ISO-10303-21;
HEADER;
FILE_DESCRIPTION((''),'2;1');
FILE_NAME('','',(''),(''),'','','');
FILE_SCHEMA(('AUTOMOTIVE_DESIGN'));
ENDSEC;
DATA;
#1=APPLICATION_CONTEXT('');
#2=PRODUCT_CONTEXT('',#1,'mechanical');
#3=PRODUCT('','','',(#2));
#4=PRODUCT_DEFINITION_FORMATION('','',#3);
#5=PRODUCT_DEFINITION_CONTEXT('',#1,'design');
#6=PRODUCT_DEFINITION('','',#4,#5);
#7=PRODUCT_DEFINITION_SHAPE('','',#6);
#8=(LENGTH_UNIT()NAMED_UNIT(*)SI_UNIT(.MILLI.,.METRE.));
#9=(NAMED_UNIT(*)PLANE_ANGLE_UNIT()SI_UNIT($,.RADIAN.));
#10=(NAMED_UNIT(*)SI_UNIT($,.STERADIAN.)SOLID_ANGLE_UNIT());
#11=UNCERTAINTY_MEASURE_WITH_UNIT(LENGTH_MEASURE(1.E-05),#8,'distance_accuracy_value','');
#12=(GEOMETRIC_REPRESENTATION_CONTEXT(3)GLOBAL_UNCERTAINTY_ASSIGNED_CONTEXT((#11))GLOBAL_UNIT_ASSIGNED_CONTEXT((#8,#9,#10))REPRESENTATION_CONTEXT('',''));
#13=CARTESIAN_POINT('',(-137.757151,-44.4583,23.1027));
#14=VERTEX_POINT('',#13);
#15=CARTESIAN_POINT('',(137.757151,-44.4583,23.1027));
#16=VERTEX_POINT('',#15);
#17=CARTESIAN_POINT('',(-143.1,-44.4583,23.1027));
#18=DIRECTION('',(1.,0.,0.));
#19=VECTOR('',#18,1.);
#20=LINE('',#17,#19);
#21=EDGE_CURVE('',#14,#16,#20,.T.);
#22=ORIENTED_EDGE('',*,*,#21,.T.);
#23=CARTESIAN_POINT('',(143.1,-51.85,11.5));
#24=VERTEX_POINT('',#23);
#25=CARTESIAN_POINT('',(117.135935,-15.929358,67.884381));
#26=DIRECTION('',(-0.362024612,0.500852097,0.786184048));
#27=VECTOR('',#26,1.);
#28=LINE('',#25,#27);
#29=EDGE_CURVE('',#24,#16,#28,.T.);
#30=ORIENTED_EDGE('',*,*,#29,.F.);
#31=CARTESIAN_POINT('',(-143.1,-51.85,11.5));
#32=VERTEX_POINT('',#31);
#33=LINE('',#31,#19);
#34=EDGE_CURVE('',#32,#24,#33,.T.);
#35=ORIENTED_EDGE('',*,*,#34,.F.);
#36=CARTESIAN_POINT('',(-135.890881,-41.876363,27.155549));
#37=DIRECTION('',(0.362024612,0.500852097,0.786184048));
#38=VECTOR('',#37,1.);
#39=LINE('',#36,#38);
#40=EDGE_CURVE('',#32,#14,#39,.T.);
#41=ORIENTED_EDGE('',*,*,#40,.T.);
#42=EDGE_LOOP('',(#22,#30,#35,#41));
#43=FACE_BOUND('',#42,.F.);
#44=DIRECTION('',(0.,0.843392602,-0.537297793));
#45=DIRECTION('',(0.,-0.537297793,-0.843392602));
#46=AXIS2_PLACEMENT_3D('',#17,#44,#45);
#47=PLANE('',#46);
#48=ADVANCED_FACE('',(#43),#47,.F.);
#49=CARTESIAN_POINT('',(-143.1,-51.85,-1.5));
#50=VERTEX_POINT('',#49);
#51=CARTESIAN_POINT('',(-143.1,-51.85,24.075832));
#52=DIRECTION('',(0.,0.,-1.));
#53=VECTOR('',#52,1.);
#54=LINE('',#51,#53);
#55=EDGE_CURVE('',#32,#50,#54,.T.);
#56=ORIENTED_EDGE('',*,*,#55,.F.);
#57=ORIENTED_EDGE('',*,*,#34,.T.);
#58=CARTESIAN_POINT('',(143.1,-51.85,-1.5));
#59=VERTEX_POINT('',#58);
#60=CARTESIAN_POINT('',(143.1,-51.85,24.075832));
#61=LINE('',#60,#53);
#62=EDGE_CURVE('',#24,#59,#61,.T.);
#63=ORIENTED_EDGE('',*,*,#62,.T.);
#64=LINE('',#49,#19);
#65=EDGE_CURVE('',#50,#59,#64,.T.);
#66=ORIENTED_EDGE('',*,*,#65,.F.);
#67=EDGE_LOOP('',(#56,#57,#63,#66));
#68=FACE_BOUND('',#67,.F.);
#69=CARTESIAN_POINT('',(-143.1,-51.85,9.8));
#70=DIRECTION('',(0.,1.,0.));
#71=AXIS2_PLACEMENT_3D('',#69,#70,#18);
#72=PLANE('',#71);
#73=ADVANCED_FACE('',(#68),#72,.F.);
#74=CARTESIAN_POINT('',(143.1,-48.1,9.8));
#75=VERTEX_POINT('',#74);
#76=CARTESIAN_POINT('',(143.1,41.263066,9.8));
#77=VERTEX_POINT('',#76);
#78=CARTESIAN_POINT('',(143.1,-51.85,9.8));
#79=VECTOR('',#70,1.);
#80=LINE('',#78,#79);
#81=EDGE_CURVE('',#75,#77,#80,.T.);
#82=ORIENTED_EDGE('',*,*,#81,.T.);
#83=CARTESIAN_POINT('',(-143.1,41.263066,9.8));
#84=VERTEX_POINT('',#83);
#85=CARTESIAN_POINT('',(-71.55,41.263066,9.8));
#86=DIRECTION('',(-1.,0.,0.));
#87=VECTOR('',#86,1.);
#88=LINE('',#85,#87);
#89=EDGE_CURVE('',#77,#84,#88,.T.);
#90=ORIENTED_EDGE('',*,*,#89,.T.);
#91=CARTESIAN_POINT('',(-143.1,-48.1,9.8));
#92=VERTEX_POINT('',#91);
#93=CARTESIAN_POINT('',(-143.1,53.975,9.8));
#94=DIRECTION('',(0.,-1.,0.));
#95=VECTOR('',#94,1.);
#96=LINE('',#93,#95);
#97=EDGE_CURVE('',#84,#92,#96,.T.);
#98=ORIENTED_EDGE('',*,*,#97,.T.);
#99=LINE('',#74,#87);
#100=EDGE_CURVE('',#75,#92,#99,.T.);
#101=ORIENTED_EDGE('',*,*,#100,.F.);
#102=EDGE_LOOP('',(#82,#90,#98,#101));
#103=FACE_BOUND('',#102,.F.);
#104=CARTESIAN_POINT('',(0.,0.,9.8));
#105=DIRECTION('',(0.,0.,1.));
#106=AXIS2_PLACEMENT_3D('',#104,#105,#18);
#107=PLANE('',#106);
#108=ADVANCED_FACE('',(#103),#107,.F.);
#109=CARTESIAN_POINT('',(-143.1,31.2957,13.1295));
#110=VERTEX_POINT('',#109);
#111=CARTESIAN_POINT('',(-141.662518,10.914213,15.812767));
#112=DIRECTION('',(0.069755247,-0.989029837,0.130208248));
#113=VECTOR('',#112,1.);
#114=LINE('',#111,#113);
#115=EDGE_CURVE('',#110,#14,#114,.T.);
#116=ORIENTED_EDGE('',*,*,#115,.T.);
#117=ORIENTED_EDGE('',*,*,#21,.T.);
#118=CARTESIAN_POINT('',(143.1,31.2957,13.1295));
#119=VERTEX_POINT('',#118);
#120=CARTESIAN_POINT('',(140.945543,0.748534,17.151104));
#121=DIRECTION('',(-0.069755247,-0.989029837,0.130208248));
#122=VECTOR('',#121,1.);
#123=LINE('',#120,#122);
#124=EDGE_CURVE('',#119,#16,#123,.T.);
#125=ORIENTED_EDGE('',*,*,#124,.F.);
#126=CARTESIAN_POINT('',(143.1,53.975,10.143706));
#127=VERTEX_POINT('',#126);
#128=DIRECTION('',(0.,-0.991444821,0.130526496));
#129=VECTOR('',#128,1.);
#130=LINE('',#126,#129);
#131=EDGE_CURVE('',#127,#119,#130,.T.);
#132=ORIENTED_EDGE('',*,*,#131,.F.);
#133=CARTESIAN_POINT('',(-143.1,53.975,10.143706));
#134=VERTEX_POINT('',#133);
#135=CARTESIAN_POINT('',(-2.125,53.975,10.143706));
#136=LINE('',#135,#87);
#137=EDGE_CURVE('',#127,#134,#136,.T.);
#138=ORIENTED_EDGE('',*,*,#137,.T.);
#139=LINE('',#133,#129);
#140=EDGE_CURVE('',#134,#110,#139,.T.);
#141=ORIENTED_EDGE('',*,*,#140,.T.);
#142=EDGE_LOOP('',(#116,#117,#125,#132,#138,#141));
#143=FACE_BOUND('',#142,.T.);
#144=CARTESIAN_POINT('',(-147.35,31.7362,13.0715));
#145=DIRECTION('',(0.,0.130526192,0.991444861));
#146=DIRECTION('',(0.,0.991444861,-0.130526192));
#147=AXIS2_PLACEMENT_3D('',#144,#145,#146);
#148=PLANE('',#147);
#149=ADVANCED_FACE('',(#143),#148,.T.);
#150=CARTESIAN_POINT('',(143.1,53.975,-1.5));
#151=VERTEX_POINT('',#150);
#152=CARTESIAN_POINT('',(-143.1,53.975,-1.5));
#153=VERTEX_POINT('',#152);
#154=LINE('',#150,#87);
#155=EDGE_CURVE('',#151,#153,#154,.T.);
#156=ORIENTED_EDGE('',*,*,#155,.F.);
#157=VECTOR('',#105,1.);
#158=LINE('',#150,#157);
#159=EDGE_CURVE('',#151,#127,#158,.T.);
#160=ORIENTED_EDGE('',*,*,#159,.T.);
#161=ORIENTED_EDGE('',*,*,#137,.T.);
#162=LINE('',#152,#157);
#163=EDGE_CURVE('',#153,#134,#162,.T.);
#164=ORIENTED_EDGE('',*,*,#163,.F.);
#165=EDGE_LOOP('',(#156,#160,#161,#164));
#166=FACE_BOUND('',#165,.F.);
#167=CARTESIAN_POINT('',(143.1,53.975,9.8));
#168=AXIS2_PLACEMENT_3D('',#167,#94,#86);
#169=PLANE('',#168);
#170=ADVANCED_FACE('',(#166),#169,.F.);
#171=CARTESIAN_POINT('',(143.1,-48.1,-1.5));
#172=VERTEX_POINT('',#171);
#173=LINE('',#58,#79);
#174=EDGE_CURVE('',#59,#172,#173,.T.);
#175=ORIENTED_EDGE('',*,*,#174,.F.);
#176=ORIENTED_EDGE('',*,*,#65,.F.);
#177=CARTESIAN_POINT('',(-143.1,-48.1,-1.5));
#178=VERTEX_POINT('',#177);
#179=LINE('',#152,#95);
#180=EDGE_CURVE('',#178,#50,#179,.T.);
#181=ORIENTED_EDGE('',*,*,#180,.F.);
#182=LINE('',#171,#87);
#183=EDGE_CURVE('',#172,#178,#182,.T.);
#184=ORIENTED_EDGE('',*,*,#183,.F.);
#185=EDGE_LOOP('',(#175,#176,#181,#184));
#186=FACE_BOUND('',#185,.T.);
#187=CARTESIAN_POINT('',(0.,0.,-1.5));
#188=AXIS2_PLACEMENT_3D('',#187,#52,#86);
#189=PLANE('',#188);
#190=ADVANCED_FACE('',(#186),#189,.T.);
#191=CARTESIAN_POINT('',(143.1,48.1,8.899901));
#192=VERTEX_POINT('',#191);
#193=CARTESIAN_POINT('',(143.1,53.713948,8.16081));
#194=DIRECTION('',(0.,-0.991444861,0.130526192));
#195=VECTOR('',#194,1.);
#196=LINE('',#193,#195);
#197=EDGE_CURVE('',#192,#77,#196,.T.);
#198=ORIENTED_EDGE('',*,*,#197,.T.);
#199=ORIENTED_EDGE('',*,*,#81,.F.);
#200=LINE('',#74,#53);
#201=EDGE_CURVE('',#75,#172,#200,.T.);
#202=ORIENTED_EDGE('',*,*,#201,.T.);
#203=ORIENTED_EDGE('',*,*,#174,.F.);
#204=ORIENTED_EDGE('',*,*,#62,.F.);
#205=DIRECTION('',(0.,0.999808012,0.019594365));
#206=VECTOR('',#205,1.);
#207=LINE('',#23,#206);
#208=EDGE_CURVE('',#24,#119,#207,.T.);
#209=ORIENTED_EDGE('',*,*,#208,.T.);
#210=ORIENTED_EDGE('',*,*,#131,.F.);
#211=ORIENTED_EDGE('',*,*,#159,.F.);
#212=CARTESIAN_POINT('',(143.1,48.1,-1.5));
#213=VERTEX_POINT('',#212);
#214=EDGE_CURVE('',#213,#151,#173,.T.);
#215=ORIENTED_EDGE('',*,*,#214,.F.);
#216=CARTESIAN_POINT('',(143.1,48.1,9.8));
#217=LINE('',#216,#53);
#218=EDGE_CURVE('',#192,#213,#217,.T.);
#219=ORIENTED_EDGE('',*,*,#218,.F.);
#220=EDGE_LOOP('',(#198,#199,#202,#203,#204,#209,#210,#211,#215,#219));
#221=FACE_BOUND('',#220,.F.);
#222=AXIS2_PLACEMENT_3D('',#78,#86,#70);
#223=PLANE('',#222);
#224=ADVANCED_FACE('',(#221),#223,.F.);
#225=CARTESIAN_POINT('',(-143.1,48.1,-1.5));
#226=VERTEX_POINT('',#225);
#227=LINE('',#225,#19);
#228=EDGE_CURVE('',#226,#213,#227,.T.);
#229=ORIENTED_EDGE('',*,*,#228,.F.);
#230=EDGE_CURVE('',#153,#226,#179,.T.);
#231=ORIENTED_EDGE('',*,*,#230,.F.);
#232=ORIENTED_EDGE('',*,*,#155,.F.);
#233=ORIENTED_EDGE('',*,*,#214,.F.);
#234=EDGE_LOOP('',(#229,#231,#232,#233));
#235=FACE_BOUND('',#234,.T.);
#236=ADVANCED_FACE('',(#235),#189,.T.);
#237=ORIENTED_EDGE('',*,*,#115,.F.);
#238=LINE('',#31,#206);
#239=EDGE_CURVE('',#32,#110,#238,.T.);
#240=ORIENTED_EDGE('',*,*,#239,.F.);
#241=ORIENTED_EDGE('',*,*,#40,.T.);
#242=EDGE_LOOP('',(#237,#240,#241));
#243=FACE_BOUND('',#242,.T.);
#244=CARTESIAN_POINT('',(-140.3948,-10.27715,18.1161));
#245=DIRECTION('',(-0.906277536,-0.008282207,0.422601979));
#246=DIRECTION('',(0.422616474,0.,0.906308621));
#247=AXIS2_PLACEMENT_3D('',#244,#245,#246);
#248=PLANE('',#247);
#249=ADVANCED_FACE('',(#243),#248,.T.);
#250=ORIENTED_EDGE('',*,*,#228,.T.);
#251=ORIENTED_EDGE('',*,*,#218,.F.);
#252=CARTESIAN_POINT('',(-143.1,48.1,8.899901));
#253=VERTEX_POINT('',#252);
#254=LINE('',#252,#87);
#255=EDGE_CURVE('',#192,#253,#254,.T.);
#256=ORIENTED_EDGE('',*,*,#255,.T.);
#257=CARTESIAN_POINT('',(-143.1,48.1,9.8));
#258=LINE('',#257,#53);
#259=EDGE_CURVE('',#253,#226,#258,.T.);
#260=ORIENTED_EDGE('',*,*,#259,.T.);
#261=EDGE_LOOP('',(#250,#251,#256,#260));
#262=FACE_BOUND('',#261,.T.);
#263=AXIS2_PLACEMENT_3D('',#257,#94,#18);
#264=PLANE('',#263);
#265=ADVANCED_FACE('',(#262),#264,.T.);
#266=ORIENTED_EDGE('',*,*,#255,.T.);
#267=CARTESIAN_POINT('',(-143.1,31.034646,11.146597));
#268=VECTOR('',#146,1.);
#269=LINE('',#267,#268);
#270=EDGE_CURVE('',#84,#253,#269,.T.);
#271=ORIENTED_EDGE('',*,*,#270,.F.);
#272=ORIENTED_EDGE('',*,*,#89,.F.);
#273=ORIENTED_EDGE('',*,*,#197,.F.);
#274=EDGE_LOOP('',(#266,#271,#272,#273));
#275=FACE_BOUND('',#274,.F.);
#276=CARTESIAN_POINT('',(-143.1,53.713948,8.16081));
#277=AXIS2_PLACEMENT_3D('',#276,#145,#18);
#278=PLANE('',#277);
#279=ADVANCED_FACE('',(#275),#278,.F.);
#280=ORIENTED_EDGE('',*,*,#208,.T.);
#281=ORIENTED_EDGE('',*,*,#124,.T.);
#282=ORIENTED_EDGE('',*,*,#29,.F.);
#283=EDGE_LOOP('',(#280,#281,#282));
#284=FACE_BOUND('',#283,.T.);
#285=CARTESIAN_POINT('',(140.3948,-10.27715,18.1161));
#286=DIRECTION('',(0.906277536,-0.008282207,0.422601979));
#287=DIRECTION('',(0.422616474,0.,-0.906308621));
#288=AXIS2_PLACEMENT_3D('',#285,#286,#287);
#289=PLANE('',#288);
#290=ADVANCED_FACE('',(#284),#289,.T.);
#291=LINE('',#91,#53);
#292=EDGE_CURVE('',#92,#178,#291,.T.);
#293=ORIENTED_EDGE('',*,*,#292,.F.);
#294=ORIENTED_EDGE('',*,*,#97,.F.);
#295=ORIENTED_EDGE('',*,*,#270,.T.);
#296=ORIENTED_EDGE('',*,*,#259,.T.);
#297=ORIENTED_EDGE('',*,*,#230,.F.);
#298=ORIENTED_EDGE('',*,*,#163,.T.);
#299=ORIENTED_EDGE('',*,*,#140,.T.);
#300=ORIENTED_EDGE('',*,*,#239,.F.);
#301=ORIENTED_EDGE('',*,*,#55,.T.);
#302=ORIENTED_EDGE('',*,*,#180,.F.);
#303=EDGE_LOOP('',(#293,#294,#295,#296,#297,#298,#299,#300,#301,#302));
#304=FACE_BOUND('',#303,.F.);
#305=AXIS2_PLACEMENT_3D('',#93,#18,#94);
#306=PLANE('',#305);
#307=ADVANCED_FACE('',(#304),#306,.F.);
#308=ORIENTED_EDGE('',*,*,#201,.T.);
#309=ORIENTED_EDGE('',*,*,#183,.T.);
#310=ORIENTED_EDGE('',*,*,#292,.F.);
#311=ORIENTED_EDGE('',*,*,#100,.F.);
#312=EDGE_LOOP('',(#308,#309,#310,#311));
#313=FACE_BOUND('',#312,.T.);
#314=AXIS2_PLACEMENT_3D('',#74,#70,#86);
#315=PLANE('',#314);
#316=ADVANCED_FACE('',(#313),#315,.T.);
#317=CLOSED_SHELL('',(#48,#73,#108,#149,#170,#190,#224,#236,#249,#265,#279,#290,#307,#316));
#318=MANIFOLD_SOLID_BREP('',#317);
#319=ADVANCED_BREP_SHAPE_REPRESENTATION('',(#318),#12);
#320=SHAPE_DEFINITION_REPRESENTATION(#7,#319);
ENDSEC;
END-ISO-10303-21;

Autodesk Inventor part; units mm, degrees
ref_plane "Work Plane1" through (0, 0, 9.8) normal (0, 0, 1) x (1, 0, 0)
sketch "Sketch1" plane through (0, 0, 9.8) normal (0, 0, 1) x (1, 0, 0)
  line L0 (145.35, 54.1) -> (-145.35, 54.1) projected
  line L1 (145.35, -54.1) -> (145.35, 54.1) projected
  line L2 (-145.35, -54.1) -> (145.35, -54.1) projected
  line L3 (-145.35, 54.1) -> (-145.35, -54.1) projected
  line L4 (143.1, 53.975) -> (-143.1, 53.975)
  line L5 (-143.1, 53.975) -> (-143.1, -51.85)
  line L6 (-143.1, -51.85) -> (143.1, -51.85)
  line L7 (143.1, -51.85) -> (143.1, 53.975)
  point P0 (0, 0)
  dimension "d0" = 0.125
  dimension "d1" = 2.25
  dimension "d2" = 2.25
  dimension "d3" = 2.25
ref_plane "Work Plane2" through (-147.35, 31.7362, 13.0715) normal (0, 0.1305262, 0.9914449) x (1, 0, 0)
extrude "Extrusion1" add sketch "Sketch1" along normal up to surface contours L7 L6 L5 L4 surface through (-147.35, 31.7362, 13.0715) normal (0, 0.1305262, 0.9914449)
sketch "Sketch3" plane through (0, 0, 9.8) normal (0, 0, -1) x (-1, 0, 0)
  line L0 (143.1, 48.1) -> (-143.1, 48.1)
  line L1 (-143.1, -51.85) -> (-143.1, 53.975) projected
  line L2 (-143.1, -48.1) -> (143.1, -48.1)
  line L3 (143.1, 53.975) -> (143.1, -51.85) projected
  line L4 (-143.1, 53.975) -> (143.1, 53.975) projected
  line L5 (143.1, -51.85) -> (-143.1, -51.85) projected
  point P0 (0, 0)
  dimension "d8" = 5.875
  dimension "d9" = 3.75
ref_plane "Work Plane3" through (-145.35, -54.1, -1.5) normal (0, 0, 1) x (1, 0, 0)
extrude "Extrusion2" add sketch "Sketch3" along normal up to surface (11.3 mm away) contours L0 L1 L4 L3 | L3 L5 L1 L2
sketch "Sketch4" plane through (-143.1, -48.1, 9.8) normal (-1, 0, 0) x (0, 0, 1)
  line L0 (14.2758, -3.75) -> (0.3437, 102.075) projected
  line L1 (13.3027, 3.6417) -> (1.7, -3.75)
  line L2 (-11.3, -3.75) -> (14.2758, -3.75) projected
  line L3 (0.7, -6) -> (0.7, -8) projected
  point P0 (-9.8, 48.1)
  dimension "d12" = 65
  dimension "d23" = 1
extrude "Extrusion3" cut sketch "Sketch4" against normal through all
sketch "Sketch5" plane through (-143.1, -51.85, -1.5) normal (0, -1, 0) x (1, 0, 0)
  line L0 (0, 13) -> (0, 24.6027) projected
  line L1 (0, 13) -> (5.4104, 24.6027)
  line L2 (0, 24.6027) -> (286.2, 24.6027) projected
  point P0 (143.1, 1.5)
  dimension "d15" = 65
sketch "Sketch6" plane through (-143.1, -48.1, 9.8) normal (-1, 0, 0) x (0, 0, 1)
  line L0 (1.7, -3.75) -> (3.3295, 79.3957)
  point P0 (-9.8, 48.1)
  point P1 (0.3437, 102.075)
  dimension "d16" = 22.875
sweep "Sweep1" cut profiles "Sketch5" path "Sketch6"
mirror "Mirror1" about plane through (0, 0, 0) normal (1, 0, 0) of "Sweep1"
ref_plane "Work Plane4" through (-143.1, 53.7139, 8.1608) normal (0, 0.1305262, 0.9914449) x (1, 0, 0)
sketch "Sketch8" plane through (-143.1, 53.975, 10.1437) normal (0, 0.1305262, 0.9914449) x (1, 0, 0)
  line L0 (286.2, 0) -> (286.2, -22.875) projected
  line L1 (286.2, -15) -> (0, -15)
  line L2 (0, -22.875) -> (0, 0) projected
  line L3 (0, 0) -> (286.2, 0) projected
  point P0 (143.1, -52.1892)
  dimension "d20" = 15
extrude "Extrusion4" add sketch "Sketch8" against normal up to surface (2 mm away)
sketch "Sketch9" plane through (-143.1, -51.85, -1.5) normal (0, -1, 0) x (1, 0, 0)
  line L0 (286.2, 0) -> (286.2, 11.6437) projected
  line L1 (286.2, 3) -> (0, 3)
  line L2 (0, 10.3999) -> (0, 0) projected
  line L3 (286.2, 0) -> (0, 0) projected
  point P0 (143.1, 1.5)
  dimension "d24" = 3
properties part number "bottom"
